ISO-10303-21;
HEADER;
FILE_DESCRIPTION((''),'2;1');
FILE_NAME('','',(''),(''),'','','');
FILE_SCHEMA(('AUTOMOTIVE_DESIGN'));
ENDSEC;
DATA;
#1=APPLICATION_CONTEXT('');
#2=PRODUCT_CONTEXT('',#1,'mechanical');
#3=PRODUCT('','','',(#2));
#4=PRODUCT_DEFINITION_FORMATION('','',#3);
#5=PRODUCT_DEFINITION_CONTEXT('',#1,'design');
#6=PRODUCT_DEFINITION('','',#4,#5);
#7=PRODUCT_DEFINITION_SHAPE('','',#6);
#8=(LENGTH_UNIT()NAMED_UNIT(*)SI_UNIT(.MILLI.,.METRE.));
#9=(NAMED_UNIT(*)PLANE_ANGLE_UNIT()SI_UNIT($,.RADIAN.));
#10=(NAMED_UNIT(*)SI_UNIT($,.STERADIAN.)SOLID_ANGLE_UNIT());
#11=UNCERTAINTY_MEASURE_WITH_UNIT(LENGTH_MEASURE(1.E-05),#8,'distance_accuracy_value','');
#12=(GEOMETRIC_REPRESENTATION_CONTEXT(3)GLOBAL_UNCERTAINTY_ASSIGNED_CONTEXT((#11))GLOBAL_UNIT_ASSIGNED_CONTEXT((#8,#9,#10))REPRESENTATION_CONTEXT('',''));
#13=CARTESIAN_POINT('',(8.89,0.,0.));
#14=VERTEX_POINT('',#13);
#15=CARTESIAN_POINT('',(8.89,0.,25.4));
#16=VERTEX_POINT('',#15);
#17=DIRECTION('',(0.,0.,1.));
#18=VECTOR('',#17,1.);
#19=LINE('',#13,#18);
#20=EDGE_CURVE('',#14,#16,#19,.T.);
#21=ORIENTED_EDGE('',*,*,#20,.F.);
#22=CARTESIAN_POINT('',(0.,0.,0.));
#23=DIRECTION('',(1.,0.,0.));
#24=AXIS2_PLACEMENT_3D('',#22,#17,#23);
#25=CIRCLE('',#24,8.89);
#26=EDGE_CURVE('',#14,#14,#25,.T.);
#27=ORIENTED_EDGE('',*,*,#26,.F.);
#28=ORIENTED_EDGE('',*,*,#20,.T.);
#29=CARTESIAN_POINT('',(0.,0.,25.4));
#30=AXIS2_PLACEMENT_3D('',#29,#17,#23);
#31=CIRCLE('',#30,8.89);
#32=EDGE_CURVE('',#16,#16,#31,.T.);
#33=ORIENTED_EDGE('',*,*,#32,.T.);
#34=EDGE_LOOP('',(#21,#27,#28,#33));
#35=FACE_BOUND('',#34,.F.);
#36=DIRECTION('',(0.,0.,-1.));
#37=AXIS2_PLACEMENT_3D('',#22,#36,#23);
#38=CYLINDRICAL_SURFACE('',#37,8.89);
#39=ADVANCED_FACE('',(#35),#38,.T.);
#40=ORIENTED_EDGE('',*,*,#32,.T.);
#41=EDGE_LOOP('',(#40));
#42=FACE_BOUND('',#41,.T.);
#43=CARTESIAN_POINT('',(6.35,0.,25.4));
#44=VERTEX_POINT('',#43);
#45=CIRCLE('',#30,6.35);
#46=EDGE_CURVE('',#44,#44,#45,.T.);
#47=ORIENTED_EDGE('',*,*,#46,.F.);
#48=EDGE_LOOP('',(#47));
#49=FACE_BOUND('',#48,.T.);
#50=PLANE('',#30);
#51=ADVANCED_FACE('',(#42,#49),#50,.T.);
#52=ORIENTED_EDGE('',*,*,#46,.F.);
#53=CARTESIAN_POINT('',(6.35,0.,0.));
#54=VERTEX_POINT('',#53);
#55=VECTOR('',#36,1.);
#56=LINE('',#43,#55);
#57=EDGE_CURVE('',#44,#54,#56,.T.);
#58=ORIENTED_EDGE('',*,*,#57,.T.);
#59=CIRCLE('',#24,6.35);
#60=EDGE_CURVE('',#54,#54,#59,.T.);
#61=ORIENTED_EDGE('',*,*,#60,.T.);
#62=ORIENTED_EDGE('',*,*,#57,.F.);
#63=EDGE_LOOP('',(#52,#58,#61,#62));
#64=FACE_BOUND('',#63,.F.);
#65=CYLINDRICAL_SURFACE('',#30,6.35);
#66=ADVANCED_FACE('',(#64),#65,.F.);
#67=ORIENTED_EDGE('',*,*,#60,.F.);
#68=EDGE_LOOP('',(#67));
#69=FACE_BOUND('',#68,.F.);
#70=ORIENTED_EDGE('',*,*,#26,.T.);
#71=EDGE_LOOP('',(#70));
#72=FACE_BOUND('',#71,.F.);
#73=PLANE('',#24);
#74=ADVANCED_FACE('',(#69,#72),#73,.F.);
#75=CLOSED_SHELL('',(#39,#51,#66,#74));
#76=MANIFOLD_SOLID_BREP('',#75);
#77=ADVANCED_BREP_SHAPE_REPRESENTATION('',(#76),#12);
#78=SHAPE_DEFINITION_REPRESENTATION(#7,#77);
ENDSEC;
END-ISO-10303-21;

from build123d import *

# Parameters (mm, degrees)
F0_R     = 8.89
F1_DEPTH = 25.4
F2_R     = 6.35
F3_DEPTH = 34.8742


# Not quite as in the source:
# - the program builds the solid bodies; features that only make, move or delete a surface that nothing else refers to are left out


with BuildPart() as f1:
    # F0 (on Top) → F1 (new body)
    with BuildSketch(Plane.XY):
        Circle(F0_R)
    extrude(amount=F1_DEPTH)

    # F2 (on face) → F3 (cut)
    with BuildSketch(Plane.XY.offset(25.4)):
        Circle(F2_R)
    extrude(amount=-F3_DEPTH, mode=Mode.SUBTRACT)


solid = f1.part
